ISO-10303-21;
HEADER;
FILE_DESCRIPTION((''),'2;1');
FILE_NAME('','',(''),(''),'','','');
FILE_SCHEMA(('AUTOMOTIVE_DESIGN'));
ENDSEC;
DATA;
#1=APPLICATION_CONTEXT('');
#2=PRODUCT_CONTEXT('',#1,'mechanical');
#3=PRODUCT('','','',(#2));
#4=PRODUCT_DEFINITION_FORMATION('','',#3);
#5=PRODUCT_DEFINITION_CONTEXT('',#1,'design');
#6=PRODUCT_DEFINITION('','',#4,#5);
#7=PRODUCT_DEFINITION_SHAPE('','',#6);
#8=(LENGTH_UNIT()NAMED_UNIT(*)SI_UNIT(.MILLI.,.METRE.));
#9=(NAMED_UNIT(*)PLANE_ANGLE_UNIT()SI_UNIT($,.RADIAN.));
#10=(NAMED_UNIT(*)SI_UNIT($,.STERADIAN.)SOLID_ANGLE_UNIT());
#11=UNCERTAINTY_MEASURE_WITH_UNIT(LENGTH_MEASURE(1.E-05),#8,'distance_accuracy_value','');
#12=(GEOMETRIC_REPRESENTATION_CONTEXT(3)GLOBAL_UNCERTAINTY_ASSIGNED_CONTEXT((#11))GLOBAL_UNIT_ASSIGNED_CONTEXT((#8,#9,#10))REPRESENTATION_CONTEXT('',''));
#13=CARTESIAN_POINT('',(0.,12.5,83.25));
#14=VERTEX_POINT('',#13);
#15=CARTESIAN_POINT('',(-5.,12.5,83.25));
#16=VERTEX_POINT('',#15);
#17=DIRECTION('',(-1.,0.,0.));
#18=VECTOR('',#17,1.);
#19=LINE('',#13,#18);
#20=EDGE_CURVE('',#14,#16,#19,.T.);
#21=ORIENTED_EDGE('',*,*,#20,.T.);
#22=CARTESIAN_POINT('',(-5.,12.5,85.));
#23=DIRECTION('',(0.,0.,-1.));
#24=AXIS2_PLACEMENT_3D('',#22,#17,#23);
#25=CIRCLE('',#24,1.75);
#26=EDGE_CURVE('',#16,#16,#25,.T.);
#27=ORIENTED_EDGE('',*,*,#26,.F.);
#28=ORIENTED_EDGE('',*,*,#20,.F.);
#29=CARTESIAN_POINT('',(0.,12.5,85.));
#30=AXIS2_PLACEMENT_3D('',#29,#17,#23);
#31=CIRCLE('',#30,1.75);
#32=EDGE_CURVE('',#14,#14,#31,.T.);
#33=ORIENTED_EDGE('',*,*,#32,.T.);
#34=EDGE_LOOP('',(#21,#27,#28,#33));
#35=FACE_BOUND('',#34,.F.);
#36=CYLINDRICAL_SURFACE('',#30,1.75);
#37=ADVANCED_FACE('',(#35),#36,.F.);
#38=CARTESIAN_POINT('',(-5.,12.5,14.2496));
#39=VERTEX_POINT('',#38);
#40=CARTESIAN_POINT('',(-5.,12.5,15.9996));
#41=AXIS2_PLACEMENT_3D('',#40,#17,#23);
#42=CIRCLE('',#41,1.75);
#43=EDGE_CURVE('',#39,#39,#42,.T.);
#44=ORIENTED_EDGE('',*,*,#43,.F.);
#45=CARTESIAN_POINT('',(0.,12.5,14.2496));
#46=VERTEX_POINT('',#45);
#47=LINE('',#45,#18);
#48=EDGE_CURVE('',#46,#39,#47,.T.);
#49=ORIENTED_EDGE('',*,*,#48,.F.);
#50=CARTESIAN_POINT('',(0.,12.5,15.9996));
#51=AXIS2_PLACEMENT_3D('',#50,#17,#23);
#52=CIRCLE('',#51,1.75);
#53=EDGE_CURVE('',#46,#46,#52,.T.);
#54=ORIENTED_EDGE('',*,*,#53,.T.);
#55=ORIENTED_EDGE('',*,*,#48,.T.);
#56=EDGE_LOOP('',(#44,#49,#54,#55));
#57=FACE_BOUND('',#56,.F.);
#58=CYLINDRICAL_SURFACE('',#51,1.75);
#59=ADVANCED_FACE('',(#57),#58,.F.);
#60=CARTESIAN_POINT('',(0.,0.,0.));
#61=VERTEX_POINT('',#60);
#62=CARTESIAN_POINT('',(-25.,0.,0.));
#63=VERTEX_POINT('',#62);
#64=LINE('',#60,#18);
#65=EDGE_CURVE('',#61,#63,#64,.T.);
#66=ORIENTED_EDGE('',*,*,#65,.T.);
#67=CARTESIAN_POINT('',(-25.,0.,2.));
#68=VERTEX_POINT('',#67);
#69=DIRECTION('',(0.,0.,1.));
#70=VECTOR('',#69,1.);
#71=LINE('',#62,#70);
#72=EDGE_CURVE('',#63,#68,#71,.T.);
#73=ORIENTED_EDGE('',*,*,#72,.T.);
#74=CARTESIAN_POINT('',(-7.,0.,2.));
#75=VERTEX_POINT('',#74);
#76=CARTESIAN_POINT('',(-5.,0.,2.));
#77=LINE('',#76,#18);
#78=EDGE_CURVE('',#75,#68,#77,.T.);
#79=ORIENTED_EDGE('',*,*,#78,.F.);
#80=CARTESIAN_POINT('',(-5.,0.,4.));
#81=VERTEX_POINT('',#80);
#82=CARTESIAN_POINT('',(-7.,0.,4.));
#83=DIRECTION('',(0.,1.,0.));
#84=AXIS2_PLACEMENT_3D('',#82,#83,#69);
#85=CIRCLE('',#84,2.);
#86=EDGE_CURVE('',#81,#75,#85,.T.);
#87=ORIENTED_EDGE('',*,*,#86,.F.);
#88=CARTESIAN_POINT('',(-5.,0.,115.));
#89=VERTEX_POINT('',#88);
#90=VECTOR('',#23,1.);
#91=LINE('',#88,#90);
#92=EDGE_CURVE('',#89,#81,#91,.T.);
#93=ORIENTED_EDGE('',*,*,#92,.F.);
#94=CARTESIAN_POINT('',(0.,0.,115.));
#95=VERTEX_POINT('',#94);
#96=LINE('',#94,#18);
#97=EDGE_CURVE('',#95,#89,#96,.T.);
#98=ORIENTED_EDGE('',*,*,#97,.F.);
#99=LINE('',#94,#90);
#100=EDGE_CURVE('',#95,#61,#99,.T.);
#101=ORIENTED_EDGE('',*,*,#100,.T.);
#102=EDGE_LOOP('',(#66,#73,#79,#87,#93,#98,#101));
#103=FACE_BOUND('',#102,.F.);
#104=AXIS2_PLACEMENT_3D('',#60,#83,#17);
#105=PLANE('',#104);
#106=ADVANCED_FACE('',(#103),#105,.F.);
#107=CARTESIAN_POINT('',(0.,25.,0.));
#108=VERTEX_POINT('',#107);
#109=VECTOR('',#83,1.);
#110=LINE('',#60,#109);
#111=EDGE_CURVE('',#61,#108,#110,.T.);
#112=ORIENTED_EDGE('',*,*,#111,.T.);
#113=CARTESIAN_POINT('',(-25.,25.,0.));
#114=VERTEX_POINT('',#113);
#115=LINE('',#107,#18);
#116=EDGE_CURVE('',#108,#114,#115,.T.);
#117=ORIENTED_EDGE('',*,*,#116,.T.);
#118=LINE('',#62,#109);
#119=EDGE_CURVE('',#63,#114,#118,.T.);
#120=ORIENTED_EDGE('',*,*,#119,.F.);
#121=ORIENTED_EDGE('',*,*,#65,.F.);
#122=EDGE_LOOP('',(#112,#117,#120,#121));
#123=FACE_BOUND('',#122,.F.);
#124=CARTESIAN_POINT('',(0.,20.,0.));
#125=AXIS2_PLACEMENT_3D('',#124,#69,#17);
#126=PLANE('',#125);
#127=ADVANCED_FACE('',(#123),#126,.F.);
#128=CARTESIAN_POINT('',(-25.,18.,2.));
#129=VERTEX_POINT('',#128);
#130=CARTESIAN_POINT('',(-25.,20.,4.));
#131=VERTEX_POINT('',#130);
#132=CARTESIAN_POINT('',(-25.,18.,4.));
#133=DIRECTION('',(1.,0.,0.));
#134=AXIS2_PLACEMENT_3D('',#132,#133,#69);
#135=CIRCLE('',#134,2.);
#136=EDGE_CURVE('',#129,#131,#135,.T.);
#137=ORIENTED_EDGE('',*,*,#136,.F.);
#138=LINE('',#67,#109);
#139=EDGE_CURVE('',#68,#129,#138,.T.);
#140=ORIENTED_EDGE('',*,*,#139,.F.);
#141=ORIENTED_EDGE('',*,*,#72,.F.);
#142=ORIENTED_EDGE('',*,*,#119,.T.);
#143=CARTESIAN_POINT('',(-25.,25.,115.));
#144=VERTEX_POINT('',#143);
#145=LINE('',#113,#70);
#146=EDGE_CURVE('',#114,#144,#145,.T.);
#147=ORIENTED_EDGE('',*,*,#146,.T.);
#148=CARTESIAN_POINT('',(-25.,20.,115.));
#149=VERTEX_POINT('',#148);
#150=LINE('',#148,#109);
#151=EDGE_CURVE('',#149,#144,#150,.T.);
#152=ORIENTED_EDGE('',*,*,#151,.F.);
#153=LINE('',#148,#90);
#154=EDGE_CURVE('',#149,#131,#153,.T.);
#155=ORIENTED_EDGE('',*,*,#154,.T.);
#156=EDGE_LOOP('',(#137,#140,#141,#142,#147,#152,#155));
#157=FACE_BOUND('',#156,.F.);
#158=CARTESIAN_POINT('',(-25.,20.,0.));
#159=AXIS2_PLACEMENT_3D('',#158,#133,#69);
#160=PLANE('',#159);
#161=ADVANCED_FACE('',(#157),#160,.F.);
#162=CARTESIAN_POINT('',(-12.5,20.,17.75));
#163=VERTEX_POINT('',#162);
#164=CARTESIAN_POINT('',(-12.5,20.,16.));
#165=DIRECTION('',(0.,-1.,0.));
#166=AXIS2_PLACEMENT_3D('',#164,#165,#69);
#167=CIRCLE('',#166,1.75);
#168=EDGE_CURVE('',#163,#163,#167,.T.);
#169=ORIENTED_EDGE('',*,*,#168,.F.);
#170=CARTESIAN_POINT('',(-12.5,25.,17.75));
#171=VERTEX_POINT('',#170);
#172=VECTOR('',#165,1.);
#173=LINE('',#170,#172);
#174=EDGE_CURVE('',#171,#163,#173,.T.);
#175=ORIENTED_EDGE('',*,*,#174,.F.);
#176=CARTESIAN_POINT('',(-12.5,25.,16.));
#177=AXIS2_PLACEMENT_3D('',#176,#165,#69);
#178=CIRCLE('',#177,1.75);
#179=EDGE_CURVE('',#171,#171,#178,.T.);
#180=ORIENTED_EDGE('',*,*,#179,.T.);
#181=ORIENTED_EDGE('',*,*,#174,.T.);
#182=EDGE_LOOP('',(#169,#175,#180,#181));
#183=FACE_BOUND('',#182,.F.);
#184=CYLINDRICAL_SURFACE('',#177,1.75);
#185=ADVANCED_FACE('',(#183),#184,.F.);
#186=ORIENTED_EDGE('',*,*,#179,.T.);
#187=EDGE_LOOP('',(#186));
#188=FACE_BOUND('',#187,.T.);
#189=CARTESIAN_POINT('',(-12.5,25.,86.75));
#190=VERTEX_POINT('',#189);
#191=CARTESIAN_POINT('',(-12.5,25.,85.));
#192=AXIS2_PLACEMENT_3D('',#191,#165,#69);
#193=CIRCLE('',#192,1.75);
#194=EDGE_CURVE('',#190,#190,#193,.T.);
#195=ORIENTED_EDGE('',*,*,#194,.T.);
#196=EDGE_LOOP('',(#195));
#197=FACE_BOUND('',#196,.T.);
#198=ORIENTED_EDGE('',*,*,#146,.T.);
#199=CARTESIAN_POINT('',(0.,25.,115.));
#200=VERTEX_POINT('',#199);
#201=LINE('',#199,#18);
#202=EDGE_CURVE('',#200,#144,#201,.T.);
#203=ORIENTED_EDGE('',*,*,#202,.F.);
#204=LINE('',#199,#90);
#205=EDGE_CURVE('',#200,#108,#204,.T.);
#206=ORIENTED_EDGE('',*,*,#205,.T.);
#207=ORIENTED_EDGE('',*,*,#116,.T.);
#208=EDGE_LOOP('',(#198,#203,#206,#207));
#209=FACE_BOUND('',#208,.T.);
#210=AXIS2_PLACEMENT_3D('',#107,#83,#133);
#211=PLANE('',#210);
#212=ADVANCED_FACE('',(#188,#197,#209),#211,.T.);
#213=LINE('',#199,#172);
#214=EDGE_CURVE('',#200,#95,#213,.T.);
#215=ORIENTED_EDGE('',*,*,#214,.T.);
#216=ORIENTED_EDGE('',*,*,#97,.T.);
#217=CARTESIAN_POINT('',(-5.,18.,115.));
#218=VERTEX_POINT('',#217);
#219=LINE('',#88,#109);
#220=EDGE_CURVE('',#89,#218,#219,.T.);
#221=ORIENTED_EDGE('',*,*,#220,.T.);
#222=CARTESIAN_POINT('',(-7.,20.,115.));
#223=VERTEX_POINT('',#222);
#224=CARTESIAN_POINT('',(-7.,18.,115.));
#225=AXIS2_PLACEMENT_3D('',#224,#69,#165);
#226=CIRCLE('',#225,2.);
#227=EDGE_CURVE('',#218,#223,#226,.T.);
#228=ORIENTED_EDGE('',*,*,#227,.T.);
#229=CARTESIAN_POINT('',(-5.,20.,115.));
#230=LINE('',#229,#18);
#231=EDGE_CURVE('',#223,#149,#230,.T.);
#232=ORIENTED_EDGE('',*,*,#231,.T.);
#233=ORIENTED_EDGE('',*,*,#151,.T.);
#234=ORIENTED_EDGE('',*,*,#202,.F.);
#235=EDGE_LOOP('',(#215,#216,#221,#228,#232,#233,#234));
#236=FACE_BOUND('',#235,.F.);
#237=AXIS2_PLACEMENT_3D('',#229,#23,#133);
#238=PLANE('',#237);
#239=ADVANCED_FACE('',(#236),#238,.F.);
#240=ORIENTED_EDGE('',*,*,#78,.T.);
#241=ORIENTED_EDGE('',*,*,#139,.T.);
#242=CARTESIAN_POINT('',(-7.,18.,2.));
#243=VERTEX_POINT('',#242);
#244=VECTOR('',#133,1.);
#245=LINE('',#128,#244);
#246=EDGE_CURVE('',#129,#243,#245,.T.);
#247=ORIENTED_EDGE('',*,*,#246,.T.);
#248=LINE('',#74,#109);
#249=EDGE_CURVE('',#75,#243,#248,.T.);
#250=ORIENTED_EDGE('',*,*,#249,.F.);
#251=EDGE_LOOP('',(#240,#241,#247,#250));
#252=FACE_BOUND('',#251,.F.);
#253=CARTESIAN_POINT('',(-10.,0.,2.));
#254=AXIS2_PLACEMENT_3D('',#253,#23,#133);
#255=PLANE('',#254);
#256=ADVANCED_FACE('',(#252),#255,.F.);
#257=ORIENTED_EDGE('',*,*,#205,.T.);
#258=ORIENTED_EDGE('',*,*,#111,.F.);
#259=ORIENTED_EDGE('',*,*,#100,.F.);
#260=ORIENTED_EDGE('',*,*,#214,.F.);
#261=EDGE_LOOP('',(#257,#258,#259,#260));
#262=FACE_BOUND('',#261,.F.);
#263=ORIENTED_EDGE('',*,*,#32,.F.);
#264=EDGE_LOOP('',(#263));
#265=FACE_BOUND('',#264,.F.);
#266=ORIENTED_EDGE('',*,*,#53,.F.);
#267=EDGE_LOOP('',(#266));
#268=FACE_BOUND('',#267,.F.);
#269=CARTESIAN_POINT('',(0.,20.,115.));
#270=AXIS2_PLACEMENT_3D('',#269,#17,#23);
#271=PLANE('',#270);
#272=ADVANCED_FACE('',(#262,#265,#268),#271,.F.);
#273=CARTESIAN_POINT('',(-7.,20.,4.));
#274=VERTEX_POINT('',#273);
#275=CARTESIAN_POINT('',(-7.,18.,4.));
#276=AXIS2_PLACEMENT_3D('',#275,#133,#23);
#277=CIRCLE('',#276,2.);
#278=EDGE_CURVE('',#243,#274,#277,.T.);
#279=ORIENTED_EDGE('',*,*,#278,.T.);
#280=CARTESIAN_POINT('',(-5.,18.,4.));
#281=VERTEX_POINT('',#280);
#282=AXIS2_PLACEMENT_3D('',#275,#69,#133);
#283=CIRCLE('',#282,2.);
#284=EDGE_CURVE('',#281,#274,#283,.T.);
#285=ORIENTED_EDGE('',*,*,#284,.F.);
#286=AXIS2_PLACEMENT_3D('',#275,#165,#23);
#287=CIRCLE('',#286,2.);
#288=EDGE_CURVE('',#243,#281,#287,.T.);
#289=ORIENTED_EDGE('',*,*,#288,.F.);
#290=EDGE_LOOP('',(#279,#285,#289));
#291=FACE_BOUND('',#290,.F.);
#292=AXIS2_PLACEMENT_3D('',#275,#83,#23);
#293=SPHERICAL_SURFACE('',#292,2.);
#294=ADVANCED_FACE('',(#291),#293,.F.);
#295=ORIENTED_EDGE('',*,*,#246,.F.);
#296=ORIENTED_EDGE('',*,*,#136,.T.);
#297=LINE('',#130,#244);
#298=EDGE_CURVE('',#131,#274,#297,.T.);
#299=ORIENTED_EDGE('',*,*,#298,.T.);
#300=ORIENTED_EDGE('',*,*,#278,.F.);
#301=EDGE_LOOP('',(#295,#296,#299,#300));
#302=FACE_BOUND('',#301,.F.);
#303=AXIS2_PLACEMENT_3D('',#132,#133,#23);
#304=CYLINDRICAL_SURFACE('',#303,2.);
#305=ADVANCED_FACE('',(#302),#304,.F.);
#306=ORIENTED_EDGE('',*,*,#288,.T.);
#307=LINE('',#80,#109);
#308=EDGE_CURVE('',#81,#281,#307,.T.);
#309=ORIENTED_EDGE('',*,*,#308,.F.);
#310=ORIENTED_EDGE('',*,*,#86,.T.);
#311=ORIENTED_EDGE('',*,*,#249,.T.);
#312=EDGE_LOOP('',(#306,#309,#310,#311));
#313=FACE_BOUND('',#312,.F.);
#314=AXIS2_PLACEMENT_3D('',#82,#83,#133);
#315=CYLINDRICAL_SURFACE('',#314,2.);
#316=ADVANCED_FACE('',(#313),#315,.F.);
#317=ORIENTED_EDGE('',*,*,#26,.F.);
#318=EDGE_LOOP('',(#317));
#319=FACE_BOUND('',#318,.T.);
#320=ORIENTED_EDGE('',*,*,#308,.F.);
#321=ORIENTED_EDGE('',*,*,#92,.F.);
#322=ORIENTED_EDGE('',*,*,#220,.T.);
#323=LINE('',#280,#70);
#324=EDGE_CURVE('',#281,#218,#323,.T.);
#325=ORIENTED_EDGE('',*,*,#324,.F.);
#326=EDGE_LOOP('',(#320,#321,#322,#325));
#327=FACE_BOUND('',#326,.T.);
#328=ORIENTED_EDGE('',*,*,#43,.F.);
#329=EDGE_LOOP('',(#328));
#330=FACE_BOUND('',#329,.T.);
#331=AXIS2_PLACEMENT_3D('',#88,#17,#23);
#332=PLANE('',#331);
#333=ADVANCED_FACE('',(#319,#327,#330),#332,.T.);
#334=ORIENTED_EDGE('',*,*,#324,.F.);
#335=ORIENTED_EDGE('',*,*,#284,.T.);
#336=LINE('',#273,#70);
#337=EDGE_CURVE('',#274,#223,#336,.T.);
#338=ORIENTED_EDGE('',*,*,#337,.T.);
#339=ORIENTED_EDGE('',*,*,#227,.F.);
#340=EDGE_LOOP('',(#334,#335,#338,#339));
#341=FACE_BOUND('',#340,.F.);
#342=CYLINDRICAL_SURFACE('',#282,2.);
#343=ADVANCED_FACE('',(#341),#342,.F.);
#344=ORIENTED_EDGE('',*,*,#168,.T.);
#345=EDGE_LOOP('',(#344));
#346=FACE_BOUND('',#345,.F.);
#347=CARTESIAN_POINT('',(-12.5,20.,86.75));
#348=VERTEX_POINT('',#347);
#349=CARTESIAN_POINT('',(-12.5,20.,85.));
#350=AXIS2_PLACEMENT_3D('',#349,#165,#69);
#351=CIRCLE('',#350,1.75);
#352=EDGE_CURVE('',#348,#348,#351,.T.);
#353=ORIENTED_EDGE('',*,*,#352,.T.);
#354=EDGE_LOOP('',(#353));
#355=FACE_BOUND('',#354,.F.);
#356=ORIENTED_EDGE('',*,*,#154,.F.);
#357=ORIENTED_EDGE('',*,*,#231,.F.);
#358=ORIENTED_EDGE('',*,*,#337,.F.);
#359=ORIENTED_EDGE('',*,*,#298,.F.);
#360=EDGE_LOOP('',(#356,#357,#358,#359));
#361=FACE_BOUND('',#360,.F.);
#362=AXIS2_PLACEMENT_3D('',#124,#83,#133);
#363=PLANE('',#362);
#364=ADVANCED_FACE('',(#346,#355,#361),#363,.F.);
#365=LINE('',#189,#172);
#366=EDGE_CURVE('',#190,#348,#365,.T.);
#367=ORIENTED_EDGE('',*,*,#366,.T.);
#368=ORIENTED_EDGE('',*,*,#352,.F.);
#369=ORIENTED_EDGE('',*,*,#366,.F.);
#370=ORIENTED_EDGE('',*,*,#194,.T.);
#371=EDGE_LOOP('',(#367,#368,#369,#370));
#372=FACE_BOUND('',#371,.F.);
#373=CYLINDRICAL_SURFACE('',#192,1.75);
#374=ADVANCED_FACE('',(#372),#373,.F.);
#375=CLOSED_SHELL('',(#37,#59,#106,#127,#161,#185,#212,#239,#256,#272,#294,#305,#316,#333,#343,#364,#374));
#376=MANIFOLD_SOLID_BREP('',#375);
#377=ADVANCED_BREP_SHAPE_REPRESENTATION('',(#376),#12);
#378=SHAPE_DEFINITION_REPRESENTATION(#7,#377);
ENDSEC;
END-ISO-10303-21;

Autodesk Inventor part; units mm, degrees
ref_plane "YZ Plane" through (0, 0, 0) normal (1, 0, 0) x (0, 1, 0)
ref_plane "XZ Plane" through (0, 0, 0) normal (0, 1, 0) x (-1, 0, 0)
ref_plane "XY Plane" through (0, 0, 0) normal (0, 0, 1) x (1, 0, 0)
sketch "Sketch1" plane through (0, 0, 0) normal (0, 1, 0) x (-1, 0, 0)
  line L0 (0, 0) -> (0, 115)
  line L1 (0, 115) -> (5, 115)
  line L2 (0, 0) -> (25, 0)
  line L3 (25, 0) -> (25, 2)
  line L4 (5, 115) -> (5, 0)
  line L5 (25, 2) -> (0, 2)
  line L6 (5, 2) -> (10, 2)
  line L7 (5, 7) -> (5, 2)
  dimension "d1" = 5
  dimension "d2" = 25
  dimension "d3" = 2
  dimension "d60" = 115
extrude "Extrusion2" add sketch "Sketch1" along normal blind 20
sketch "Sketch3" plane through (0, 20, 0) normal (0, 1, 0) x (1, 0, 0)
  line L0 (0, 0) -> (-25, 0)
  line L1 (-25, 0) -> (-25, -2) projected
  line L2 (-25, 0) -> (-25, -2)
  line L3 (-25, -2) -> (-5, -2)
  line L4 (-5, -115) -> (0, -115) projected
  line L5 (-5, -115) -> (0, -115)
  line L6 (0, 0) -> (-25, 0) projected
  line L7 (0, -115) -> (0, 0)
  line L8 (-5, -115) -> (-25, -115)
  line L9 (-25, -115) -> (-25, -2)
extrude "Extrusion3" add sketch "Sketch3" along normal blind 5
fillet "Face Fillet1" radius 2 1 edges at (-5, 10, 2)
fillet "Face Fillet2" radius 2 1 edges at (-16, 20, 2)
hole "Hole3" at (0, 12.5, 15.9996) direction (-1, 0, 0) diameter 3.5 depth 8.8
hole "Hole4" at (-12.5, 25, 16) direction (0, -1, 0) diameter 3.5 depth 8.8
sketch "Sketch11" plane through (0, 25, 0) normal (0, 1, 0) x (1, 0, 0)
  line L0 (-5, -115) -> (0, -115) projected
  line L1 (0, -115) -> (-12.5, -115)
  line L2 (-12.5, -115) -> (-12.5, -85)
  line L3 (-12.5, -85) -> (0, -85)
  line L4 (0, -85) -> (0, -115)
  point P0 (0, 0)
  dimension "d82" = 12.5
  dimension "d83" = 30
hole "Hole7" at (-12.5, 25, 85) direction (0, -1, 0) diameter 3.5 depth 8.8
sketch "Sketch12" plane through (0, 0, 115) normal (1, 0, 0) x (0, 0, -1)
  line L0 (115, 25) -> (0, 25) projected
  line L1 (0, 25) -> (30, 25)
  line L2 (30, 25) -> (30, 12.5)
  line L3 (30, 12.5) -> (0, 12.5)
  line L4 (0, 12.5) -> (0, 25)
  point P0 (115, 0)
  dimension "d91" = 30
  dimension "d92" = 12.5
hole "Hole8" at (0, 12.5, 85) direction (-1, 0, 0) diameter 3.5 depth 8.8
properties part number "wall-joint"
